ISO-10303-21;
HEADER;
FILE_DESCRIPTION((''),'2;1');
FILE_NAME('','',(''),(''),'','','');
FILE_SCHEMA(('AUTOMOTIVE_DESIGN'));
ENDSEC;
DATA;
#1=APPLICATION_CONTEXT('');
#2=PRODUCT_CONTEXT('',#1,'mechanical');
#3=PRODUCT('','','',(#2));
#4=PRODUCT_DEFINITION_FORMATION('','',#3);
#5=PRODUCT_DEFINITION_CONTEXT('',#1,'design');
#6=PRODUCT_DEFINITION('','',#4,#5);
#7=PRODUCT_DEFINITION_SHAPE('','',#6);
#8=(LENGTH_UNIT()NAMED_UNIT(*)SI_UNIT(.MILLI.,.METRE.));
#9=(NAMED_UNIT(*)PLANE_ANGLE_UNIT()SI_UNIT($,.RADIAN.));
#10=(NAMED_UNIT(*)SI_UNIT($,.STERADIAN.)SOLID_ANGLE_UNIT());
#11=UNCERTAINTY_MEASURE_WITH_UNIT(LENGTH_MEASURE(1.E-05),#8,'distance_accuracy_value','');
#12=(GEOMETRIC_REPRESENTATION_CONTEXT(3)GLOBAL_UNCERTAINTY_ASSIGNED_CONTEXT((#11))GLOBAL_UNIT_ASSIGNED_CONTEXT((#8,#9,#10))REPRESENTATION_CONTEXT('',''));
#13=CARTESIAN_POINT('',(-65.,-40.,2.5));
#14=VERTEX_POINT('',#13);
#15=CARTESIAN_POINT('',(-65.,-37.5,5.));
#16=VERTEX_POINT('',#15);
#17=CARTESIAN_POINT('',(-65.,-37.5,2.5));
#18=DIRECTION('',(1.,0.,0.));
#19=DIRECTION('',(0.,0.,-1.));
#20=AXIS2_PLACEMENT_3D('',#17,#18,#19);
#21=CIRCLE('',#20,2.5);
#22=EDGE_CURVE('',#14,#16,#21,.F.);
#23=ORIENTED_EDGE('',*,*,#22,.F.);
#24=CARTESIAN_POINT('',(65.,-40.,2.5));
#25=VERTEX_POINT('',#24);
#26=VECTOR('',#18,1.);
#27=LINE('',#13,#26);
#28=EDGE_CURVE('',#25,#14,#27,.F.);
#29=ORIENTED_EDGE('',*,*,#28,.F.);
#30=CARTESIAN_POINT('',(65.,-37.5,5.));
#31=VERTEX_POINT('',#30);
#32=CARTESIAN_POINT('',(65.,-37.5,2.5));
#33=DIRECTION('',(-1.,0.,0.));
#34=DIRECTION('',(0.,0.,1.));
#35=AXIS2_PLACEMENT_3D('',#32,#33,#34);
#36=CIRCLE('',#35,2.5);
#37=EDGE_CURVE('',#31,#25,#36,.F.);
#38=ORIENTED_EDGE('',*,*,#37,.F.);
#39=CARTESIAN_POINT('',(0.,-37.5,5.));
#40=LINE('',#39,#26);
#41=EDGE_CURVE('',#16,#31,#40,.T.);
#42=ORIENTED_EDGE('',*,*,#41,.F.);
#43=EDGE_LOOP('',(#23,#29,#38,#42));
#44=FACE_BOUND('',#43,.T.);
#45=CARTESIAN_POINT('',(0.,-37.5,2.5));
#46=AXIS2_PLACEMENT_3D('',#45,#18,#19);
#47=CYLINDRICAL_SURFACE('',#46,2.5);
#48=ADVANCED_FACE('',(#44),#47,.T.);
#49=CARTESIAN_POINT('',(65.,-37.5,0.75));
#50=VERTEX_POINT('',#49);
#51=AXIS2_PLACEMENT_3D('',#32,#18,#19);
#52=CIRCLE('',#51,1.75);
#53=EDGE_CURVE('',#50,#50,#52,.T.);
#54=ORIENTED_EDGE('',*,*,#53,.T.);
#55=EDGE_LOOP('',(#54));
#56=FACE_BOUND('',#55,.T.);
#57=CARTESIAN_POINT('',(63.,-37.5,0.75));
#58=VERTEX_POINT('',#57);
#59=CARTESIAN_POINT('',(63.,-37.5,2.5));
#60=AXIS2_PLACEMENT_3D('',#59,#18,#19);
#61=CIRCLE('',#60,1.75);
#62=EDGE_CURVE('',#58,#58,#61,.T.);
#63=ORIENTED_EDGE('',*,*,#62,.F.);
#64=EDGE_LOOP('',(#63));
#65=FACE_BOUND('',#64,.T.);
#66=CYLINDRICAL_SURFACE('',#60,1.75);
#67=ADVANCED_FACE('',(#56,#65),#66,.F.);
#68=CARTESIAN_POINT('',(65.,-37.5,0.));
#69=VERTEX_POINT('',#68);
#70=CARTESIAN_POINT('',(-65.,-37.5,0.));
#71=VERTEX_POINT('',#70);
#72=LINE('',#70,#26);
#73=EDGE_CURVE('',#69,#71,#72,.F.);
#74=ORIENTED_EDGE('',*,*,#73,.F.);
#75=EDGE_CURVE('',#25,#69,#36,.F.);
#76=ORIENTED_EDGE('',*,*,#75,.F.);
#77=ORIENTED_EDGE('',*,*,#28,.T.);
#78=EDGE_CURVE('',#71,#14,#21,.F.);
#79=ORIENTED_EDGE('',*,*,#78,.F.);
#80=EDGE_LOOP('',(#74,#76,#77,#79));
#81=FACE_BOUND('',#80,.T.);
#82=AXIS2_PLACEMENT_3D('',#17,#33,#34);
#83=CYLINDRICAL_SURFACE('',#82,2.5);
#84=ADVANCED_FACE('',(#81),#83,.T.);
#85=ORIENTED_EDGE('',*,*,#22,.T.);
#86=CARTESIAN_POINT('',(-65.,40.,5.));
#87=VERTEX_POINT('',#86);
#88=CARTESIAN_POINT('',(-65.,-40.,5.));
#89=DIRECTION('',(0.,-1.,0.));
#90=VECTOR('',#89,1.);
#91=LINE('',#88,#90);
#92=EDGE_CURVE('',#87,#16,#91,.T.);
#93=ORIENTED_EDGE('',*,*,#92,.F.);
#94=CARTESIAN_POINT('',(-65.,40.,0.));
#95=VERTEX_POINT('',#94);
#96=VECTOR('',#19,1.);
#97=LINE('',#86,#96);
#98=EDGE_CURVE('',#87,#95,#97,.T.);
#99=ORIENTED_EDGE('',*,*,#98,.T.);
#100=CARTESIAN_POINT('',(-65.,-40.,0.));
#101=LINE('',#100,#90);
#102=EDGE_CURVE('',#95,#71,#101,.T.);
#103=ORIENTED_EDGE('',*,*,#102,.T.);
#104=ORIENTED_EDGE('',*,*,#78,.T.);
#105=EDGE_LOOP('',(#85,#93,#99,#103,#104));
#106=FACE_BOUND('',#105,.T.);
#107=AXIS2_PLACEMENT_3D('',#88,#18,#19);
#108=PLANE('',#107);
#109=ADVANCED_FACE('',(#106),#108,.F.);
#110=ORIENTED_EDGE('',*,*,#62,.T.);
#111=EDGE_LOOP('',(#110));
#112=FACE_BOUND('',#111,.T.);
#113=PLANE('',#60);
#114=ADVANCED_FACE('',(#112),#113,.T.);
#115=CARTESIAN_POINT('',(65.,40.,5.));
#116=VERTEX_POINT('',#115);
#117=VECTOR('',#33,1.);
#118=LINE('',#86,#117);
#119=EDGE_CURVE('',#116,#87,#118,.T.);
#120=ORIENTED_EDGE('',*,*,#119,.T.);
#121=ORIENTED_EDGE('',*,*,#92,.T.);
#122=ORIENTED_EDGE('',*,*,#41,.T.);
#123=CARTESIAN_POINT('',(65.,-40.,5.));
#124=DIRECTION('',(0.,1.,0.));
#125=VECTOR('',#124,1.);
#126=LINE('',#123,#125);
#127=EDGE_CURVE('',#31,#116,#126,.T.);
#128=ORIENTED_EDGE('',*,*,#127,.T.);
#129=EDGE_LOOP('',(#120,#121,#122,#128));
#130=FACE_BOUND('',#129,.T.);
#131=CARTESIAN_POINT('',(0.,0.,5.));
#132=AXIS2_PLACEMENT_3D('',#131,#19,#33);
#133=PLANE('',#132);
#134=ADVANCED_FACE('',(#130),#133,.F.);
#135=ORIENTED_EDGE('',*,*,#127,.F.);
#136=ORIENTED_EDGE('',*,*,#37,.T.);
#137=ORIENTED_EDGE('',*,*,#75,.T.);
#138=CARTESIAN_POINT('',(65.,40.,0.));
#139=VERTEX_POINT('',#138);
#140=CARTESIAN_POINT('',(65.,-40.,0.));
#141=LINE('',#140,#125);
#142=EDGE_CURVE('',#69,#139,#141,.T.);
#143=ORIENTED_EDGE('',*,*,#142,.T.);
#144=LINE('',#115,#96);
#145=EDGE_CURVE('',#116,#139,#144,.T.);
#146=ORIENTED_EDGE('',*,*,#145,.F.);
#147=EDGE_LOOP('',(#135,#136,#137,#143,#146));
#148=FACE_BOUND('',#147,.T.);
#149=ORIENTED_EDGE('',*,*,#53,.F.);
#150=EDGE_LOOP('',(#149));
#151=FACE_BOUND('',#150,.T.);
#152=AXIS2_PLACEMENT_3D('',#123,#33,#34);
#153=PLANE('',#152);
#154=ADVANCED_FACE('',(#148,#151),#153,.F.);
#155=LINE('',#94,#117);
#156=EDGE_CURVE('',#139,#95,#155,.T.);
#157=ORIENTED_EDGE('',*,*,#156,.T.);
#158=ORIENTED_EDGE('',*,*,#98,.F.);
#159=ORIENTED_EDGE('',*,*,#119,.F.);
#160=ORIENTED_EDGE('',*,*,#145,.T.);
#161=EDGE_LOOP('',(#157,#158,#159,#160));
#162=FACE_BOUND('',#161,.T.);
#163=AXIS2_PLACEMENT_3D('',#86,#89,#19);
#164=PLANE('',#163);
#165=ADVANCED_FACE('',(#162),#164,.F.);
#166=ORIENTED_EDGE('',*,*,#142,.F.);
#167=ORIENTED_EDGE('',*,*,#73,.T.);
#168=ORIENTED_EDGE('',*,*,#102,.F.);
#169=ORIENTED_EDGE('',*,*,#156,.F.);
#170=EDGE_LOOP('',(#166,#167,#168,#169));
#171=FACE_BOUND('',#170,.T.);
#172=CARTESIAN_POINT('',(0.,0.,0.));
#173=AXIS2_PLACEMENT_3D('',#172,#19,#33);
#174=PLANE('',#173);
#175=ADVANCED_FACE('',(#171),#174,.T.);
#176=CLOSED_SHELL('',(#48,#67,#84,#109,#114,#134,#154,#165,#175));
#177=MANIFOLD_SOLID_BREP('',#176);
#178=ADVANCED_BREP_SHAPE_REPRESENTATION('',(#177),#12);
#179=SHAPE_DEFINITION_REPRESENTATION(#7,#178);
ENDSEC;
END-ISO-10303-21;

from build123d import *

# Parameters (mm, degrees)
SKETCH1_W           = 130
SKETCH1_H           = 80
BOSS_EXTRUDE1_DEPTH = 5
FILLET1_R           = 2.5
SKETCH2_R           = 1.75
CUT_EXTRUDE1_DEPTH  = 2


with BuildPart() as part:
    # Sketch1 → Boss-Extrude1 (new body)
    with BuildSketch(Plane.XY):
        Rectangle(SKETCH1_W, SKETCH1_H)
    extrude(amount=BOSS_EXTRUDE1_DEPTH)

    # Fillet1
    fillet1_edges = [part.edges().sort_by_distance(p)[0] for p in [
        (0, -40, 0),
        (0, -40, 5),
    ]]
    fillet(fillet1_edges, radius=FILLET1_R - 0.0001)  # a hair under: the kernel refuses the full size

    # Sketch2 → Cut-Extrude1 (cut)
    with BuildSketch(Plane(origin=(65, 0, 0), x_dir=(0, 0, -1), z_dir=(1, 0, 0))):
        with Locations((-2.5, -37.5)):
            Circle(SKETCH2_R)
    extrude(amount=-CUT_EXTRUDE1_DEPTH, mode=Mode.SUBTRACT)


solid = part.part
